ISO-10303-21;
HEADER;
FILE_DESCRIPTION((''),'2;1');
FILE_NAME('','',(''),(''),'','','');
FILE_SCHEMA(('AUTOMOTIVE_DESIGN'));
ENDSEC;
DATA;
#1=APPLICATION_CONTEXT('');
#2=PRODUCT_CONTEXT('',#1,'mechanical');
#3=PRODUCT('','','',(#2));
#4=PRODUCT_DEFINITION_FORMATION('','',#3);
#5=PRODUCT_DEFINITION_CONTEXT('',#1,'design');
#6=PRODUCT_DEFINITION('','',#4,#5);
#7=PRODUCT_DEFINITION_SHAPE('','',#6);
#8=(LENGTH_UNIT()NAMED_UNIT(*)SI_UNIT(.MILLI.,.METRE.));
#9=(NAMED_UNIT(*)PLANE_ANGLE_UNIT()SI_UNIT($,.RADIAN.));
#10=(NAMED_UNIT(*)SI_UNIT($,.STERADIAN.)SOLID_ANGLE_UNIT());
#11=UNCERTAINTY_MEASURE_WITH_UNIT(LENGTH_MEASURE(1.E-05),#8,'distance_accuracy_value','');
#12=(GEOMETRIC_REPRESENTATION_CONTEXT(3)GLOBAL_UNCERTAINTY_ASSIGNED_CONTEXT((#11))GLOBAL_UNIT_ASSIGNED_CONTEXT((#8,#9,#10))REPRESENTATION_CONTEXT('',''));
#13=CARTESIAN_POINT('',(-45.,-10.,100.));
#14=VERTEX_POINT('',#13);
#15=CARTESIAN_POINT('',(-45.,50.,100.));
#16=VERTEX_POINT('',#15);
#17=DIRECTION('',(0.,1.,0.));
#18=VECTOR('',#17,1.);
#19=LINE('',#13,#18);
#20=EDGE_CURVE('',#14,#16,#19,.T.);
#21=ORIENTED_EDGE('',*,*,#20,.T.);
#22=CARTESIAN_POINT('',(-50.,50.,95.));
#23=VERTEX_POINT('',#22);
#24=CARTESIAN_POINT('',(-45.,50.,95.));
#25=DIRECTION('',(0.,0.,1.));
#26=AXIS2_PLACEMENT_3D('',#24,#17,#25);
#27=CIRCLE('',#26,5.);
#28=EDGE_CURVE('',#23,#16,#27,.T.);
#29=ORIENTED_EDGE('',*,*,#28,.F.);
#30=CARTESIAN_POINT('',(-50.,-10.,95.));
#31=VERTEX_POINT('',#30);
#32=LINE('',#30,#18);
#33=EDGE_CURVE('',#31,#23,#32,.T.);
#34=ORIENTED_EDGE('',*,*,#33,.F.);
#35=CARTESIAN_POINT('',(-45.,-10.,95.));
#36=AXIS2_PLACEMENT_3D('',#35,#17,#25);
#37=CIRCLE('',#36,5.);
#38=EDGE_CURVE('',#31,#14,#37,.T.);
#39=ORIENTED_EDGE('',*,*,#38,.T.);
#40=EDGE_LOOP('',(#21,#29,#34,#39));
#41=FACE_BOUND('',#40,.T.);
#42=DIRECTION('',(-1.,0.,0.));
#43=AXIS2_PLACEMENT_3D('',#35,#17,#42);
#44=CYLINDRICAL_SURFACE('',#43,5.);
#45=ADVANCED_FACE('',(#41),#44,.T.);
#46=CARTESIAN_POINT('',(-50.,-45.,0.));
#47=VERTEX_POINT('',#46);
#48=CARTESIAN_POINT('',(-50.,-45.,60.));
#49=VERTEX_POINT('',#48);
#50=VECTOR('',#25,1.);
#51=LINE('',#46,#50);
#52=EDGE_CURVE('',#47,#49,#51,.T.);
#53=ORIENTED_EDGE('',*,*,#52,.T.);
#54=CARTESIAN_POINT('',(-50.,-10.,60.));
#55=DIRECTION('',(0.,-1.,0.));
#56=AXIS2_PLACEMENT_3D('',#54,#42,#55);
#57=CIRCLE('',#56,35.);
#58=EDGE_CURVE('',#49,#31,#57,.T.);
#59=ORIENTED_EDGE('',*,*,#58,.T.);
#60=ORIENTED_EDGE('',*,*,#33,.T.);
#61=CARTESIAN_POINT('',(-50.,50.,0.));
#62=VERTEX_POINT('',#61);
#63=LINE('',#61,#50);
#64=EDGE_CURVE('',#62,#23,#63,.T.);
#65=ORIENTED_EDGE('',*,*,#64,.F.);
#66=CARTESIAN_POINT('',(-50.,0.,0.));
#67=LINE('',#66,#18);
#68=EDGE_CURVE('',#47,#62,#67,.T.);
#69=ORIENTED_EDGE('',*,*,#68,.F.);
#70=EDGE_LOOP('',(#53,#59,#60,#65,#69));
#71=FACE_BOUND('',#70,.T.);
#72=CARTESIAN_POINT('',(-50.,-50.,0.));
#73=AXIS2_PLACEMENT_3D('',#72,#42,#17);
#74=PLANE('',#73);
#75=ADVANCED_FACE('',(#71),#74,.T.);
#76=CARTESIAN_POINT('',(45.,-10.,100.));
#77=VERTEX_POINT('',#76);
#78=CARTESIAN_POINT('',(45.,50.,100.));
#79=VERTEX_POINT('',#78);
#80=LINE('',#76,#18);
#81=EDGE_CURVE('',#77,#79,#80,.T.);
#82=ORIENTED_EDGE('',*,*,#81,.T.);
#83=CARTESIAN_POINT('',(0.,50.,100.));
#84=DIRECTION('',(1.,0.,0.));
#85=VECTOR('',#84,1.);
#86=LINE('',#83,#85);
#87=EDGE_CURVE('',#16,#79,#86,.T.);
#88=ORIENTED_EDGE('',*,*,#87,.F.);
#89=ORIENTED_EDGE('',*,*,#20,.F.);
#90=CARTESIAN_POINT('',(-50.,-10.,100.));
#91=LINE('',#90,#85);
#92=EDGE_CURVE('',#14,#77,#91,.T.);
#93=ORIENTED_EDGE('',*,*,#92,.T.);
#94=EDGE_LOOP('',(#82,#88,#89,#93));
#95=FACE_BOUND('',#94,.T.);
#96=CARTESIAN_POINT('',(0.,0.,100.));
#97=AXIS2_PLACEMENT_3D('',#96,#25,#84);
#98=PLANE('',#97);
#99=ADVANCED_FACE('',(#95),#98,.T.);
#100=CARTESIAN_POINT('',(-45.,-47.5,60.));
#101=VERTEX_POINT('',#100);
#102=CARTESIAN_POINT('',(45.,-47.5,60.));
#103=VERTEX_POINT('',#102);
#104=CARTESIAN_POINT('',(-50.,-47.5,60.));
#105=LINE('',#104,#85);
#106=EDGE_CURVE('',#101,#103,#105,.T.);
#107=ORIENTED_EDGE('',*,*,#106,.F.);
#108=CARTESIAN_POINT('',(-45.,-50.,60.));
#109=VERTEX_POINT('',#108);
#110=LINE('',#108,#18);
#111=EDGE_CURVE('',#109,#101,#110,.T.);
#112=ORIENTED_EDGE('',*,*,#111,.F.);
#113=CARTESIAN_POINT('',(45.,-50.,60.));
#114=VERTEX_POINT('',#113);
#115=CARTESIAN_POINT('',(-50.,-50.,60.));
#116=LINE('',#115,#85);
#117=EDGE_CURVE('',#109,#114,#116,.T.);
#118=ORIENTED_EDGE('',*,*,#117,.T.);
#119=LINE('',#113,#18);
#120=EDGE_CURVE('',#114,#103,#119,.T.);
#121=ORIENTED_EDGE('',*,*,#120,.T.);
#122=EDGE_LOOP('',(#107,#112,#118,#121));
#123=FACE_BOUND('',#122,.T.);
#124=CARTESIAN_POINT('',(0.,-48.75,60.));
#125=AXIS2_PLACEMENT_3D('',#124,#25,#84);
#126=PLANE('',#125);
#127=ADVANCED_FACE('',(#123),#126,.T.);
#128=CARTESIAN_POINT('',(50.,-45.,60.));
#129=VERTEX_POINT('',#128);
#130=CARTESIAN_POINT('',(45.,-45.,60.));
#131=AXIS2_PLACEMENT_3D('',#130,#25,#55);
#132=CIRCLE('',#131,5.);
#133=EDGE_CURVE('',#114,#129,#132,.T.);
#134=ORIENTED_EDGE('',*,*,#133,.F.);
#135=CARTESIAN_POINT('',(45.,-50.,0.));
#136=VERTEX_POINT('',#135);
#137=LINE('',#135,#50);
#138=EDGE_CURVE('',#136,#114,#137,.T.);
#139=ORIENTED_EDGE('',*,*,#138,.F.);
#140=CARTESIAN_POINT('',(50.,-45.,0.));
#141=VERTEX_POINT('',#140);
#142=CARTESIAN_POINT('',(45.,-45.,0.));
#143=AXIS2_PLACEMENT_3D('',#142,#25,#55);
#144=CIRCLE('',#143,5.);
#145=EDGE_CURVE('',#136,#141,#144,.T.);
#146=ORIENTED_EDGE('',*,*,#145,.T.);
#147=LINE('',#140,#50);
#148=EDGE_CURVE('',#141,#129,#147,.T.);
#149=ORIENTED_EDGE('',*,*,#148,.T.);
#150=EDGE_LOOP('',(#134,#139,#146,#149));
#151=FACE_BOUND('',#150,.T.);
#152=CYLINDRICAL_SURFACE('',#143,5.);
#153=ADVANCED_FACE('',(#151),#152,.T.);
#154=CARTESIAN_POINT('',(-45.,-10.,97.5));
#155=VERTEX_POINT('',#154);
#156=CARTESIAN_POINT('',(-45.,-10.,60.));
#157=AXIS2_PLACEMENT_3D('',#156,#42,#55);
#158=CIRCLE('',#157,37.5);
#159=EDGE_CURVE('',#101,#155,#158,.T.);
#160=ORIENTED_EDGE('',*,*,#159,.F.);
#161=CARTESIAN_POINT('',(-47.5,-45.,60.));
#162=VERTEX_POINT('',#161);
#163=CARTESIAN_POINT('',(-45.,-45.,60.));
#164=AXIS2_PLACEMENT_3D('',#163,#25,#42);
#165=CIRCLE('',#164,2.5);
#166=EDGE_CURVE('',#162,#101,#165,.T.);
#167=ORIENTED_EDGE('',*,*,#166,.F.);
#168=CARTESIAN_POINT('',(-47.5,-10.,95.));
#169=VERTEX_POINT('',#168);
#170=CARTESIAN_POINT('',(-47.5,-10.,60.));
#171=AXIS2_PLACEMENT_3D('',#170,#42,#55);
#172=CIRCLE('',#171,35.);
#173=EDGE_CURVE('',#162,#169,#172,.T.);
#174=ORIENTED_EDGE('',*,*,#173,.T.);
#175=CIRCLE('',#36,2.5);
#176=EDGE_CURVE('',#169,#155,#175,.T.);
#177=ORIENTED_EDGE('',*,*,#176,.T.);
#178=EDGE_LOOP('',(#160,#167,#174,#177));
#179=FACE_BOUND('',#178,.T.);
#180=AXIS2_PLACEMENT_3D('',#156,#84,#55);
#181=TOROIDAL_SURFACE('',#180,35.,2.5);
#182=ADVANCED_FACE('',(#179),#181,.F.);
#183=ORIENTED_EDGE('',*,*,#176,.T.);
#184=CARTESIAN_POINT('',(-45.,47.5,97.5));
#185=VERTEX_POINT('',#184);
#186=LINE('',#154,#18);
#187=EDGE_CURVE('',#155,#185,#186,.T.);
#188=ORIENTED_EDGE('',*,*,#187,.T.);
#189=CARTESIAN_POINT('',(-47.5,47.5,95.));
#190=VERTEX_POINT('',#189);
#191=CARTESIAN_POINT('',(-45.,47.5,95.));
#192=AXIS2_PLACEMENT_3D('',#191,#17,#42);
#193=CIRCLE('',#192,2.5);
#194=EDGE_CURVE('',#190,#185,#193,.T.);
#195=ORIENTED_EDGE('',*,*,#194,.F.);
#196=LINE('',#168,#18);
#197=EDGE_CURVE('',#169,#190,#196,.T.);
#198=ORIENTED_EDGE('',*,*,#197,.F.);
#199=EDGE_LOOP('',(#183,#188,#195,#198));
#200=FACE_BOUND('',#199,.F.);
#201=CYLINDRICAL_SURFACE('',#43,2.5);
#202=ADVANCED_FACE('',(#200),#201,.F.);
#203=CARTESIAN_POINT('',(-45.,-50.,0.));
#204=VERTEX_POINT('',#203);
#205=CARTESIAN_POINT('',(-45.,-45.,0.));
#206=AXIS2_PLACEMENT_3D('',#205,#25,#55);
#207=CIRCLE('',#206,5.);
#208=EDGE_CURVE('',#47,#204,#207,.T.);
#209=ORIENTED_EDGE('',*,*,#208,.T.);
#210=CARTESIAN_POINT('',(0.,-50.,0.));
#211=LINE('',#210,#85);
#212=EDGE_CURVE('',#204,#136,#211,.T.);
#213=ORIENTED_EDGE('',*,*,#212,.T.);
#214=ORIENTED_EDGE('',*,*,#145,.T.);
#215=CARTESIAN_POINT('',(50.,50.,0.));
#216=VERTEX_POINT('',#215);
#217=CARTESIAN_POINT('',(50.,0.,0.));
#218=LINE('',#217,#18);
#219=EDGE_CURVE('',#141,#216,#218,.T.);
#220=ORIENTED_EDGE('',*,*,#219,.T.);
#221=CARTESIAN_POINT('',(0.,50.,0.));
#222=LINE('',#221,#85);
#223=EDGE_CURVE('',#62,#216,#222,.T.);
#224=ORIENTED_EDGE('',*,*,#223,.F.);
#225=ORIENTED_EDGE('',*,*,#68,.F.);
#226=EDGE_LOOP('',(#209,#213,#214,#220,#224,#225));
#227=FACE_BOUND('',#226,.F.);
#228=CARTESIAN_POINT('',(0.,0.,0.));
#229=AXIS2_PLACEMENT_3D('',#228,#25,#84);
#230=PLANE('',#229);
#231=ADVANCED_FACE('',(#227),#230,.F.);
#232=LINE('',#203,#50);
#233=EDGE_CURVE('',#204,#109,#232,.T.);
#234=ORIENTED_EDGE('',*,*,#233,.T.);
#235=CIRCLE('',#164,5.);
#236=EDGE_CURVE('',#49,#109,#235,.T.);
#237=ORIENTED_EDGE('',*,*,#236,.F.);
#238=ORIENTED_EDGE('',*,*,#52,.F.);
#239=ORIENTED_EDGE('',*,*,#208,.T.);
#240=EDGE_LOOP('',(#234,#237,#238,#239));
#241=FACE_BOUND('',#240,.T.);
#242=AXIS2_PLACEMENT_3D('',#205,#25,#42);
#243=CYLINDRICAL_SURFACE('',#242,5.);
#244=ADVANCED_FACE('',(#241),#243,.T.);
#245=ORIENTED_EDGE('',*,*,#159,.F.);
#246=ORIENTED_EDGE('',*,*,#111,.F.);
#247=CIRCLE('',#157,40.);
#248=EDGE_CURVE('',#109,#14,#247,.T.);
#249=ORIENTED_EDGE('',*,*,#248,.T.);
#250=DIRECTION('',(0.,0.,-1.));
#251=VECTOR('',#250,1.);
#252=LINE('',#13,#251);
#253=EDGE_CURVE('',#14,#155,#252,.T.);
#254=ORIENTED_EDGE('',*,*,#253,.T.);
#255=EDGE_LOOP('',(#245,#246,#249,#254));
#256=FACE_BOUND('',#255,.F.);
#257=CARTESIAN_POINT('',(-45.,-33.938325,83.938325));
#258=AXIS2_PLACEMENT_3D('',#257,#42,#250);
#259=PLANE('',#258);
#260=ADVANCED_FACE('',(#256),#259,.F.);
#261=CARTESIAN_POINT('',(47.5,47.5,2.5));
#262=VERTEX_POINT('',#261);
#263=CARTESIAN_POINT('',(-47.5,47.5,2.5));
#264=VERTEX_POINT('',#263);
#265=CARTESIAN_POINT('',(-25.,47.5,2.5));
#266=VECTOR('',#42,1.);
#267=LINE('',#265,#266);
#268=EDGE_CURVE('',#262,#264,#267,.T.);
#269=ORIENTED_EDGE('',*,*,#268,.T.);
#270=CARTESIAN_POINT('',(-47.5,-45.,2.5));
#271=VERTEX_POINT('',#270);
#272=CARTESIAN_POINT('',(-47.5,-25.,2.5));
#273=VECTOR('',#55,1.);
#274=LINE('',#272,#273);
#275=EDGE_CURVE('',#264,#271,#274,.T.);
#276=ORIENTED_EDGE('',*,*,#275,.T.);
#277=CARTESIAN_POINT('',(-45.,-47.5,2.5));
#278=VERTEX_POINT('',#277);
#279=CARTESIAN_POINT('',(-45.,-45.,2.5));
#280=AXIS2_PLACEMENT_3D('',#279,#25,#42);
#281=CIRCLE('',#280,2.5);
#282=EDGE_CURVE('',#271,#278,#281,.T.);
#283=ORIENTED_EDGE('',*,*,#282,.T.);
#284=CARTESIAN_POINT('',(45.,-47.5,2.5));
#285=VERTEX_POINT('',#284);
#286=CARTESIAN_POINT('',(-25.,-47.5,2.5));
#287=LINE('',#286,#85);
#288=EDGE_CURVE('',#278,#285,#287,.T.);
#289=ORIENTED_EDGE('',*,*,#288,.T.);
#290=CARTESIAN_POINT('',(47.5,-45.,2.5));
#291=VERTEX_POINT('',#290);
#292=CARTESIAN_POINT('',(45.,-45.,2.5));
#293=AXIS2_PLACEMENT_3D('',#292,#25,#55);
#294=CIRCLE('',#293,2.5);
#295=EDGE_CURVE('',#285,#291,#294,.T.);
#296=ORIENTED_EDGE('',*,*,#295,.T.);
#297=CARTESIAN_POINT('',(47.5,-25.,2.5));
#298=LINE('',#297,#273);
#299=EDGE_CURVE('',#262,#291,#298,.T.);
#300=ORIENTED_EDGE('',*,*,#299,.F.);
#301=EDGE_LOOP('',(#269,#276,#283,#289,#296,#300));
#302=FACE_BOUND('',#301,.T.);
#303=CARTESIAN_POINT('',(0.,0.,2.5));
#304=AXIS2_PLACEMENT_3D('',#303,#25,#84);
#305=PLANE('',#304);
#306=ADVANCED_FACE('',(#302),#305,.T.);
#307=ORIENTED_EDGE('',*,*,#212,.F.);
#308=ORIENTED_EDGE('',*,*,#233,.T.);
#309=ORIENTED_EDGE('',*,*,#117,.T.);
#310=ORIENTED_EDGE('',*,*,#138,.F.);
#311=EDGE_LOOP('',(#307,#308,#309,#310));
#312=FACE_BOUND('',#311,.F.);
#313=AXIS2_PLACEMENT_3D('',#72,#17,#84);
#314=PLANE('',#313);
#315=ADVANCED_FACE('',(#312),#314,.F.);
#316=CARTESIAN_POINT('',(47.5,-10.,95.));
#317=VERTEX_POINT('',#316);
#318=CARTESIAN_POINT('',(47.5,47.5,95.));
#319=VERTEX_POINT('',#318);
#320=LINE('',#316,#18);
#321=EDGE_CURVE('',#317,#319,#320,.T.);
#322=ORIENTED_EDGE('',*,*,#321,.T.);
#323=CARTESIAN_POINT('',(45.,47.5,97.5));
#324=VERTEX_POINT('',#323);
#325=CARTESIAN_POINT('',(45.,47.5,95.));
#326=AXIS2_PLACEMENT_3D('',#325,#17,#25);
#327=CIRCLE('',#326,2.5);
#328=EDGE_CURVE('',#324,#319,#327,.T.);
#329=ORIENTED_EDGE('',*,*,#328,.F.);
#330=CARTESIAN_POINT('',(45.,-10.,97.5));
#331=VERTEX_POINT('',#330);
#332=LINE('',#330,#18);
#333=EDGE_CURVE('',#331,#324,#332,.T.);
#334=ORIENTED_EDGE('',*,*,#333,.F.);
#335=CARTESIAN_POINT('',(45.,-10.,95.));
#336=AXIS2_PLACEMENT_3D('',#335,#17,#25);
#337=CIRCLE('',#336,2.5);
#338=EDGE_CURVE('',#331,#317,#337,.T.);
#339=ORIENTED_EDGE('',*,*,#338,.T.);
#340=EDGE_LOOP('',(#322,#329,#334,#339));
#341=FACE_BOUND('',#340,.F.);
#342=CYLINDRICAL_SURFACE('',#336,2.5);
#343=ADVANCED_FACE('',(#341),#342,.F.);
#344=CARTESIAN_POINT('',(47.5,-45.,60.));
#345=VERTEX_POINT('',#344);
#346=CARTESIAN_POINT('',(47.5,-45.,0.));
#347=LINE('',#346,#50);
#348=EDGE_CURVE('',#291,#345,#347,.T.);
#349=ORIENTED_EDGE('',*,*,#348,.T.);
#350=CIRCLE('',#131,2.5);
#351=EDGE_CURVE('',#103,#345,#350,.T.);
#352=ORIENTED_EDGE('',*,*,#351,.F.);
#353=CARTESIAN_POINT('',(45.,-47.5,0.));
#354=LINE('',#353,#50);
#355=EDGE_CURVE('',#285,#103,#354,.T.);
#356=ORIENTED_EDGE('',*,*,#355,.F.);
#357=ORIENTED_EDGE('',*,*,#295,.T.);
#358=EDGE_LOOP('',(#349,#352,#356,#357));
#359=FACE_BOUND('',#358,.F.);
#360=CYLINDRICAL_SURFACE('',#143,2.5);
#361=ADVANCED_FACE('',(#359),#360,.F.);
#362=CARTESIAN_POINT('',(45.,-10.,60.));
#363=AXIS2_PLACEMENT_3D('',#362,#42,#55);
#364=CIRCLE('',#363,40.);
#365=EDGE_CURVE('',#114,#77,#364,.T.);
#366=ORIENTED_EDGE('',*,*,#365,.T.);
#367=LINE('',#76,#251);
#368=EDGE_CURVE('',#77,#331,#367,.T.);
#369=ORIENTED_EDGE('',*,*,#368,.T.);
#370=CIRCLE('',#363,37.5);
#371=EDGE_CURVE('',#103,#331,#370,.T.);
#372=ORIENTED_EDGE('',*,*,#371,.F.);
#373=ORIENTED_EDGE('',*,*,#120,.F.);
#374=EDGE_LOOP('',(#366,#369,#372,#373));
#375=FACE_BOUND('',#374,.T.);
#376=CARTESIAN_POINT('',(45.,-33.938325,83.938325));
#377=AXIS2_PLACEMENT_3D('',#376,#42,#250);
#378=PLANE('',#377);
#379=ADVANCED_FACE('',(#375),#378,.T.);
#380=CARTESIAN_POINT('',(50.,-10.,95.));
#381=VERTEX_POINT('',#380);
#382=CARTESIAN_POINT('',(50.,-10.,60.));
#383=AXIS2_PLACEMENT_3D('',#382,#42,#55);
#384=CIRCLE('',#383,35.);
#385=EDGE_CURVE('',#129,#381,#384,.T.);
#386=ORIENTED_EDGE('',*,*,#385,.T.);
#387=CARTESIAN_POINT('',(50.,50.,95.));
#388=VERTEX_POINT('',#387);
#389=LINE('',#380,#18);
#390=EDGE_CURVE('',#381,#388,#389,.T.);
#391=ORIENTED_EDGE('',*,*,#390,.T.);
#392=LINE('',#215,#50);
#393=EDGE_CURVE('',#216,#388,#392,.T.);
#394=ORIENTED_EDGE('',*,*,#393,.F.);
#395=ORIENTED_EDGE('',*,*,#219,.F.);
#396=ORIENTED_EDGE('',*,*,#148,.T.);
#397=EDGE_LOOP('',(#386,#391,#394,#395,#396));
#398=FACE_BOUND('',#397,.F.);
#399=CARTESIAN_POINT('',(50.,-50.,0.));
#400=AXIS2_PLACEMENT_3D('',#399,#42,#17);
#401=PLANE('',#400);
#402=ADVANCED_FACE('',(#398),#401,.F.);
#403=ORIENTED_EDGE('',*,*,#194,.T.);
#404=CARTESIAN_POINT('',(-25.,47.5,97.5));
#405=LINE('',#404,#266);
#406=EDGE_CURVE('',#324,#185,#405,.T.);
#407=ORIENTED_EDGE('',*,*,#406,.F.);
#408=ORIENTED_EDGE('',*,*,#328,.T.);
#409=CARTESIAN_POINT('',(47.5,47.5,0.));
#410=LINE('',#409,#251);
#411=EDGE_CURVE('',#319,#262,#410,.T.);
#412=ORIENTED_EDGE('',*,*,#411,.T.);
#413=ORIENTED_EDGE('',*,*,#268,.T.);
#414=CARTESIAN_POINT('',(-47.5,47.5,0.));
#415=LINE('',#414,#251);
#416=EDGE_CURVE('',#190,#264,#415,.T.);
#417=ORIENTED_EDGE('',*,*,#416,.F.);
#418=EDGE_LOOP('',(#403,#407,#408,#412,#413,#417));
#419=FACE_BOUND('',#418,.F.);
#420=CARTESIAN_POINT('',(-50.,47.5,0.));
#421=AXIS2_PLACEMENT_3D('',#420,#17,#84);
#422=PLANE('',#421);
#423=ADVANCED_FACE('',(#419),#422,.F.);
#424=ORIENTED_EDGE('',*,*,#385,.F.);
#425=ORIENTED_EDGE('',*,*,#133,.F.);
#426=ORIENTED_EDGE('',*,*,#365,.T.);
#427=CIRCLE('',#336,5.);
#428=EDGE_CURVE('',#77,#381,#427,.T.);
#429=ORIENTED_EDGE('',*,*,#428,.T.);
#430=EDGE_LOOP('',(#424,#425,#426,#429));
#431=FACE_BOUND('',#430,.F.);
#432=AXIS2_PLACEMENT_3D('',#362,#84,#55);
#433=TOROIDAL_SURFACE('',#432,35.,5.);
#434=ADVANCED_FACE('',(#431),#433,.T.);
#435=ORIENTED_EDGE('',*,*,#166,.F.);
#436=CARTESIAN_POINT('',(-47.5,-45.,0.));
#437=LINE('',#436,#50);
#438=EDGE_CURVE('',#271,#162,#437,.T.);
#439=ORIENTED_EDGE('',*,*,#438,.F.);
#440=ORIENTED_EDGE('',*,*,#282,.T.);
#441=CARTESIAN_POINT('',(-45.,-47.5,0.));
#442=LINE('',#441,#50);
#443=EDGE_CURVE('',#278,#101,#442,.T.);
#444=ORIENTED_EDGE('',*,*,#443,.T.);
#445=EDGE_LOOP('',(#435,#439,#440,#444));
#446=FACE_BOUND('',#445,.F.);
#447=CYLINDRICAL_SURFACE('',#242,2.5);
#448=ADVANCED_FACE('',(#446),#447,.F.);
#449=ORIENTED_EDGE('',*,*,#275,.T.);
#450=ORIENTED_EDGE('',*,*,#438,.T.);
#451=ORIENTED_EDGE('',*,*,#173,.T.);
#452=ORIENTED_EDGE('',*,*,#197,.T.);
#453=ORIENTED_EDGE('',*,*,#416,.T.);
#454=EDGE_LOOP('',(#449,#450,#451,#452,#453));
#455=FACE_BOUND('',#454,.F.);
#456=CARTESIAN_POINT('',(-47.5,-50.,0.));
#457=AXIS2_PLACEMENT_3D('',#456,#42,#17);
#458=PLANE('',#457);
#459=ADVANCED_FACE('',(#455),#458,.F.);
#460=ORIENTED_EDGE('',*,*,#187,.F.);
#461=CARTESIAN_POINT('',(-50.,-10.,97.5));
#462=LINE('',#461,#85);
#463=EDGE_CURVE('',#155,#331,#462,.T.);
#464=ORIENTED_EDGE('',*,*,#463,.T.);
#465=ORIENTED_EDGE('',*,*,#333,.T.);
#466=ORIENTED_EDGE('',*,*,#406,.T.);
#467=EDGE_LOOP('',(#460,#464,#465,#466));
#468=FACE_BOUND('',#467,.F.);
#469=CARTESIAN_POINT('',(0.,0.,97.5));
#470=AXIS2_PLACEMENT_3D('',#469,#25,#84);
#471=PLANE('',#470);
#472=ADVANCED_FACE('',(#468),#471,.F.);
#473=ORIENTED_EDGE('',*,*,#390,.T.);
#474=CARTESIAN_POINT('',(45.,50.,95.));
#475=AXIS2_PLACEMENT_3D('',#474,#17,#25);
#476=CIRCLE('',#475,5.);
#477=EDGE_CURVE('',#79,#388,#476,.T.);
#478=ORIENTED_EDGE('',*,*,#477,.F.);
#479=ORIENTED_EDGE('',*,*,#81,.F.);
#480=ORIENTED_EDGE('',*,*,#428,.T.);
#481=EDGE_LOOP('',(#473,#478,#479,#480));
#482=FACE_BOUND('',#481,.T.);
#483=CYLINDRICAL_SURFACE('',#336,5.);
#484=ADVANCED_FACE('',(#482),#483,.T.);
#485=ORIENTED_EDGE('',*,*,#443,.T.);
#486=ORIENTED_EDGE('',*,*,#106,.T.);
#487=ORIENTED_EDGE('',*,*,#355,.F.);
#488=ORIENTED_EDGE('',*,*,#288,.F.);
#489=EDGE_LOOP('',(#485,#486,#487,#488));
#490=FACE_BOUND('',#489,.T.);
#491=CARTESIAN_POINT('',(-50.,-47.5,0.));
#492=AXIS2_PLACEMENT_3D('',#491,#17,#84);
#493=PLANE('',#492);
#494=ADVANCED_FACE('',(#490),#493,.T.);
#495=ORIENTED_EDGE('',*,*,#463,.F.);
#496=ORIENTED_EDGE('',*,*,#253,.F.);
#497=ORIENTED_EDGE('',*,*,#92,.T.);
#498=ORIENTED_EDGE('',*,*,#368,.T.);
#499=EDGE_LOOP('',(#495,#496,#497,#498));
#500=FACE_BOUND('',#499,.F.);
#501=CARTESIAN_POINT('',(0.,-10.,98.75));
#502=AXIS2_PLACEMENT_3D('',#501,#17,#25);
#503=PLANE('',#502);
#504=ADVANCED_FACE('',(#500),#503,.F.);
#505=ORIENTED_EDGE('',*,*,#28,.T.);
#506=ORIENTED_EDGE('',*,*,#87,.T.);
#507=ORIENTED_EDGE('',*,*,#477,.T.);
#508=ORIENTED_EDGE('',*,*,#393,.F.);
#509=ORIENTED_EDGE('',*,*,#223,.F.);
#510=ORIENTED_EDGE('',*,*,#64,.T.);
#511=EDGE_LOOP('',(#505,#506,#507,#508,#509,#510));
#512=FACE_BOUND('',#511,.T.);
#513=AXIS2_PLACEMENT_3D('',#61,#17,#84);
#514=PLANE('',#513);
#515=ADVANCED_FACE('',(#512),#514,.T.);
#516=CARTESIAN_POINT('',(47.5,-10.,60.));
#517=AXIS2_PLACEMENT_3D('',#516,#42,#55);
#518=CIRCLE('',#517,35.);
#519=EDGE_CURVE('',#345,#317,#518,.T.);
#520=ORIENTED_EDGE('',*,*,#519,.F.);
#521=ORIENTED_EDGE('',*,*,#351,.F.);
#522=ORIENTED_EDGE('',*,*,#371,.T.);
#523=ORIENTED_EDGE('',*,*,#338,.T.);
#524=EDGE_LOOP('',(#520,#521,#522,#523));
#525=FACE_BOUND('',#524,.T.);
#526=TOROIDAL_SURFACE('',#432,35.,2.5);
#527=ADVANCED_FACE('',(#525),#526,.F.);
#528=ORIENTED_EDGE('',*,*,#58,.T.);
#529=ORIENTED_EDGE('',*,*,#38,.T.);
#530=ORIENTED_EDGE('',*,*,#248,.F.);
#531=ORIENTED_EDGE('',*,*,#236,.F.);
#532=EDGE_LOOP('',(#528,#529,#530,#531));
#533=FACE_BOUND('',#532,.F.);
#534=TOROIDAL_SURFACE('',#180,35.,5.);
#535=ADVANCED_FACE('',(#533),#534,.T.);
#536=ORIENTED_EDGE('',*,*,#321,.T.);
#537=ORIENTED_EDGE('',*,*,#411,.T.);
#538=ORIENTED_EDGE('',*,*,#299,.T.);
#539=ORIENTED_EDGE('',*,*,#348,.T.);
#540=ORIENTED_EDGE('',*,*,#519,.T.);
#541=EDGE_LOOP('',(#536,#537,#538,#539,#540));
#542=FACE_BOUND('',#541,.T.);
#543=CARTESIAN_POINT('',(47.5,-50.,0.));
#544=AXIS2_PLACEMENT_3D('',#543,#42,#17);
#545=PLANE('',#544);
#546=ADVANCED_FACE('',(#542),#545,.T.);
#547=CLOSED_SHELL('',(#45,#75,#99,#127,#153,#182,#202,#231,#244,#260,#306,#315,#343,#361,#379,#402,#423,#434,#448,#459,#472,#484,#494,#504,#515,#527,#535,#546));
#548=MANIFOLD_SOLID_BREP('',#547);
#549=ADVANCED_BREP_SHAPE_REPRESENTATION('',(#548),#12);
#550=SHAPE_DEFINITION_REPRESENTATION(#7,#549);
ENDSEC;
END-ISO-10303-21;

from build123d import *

# Parameters (mm, degrees)
F0_W     = 100
F0_H     = 100
F1_DEPTH = 100
F2_R     = 40
F3_R     = 5
F4_T     = 2.5


# Not quite as in the source:
# - a shell that OpenCascade refuses in one call is made with other operations: the cavity is built on its own and cut out


with BuildPart() as f1:
    # F0 (on Top) → F1 (new body)
    with BuildSketch(Plane.XY):
        Rectangle(F0_W, F0_H)
    extrude(amount=F1_DEPTH)

    # F2
    f2_edges = [f1.edges().sort_by_distance(p)[0] for p in [
        (0, -50, 100),
    ]]
    fillet(f2_edges, radius=F2_R)

    # F3
    f3_edges = [f1.edges().sort_by_distance(p)[0] for p in [
        (50, 20, 100),
        (-50, 20, 100),
    ]]
    fillet(f3_edges, radius=F3_R)

    # F4: shell of thickness 2.5, made by hand


with BuildPart() as f4_core1:
    # F4_t2: copy of F1
    add(f1.part)

    # the walls: a layer under each face that stays
    f4_faces = [f4_core1.faces().sort_by_distance(p)[0] for p in [
        (0, -50, 30),
        (-48.5355339059, -48.5355339059, 30),
        (48.5355339059, -48.5355339059, 30),
        (0, 0, 0),
        (-48.5355339059, -37.2487373415, 87.2487373415),
        (48.5355339059, -37.2487373415, 87.2487373415),
        (0, 20, 100),
        (-50, 2.5, 47.5),
        (50, 2.5, 47.5),
        (0, 50, 50),
        (-48.5355339059, 20, 98.5355339059),
        (48.5355339059, 20, 98.5355339059),
    ]]
    thicken(f4_faces, amount=-F4_T, mode=Mode.SUBTRACT)


with BuildPart() as f1_1:
    add(f1.part)

    # what is left inside the walls is the cavity
    f4_cavity = [f4_core1.part.solids().sort_by_distance(p)[0] for p in [
        (0, -15.833333, 2.525),
    ]]
    add(f4_cavity, mode=Mode.SUBTRACT)


solid = f1_1.part
